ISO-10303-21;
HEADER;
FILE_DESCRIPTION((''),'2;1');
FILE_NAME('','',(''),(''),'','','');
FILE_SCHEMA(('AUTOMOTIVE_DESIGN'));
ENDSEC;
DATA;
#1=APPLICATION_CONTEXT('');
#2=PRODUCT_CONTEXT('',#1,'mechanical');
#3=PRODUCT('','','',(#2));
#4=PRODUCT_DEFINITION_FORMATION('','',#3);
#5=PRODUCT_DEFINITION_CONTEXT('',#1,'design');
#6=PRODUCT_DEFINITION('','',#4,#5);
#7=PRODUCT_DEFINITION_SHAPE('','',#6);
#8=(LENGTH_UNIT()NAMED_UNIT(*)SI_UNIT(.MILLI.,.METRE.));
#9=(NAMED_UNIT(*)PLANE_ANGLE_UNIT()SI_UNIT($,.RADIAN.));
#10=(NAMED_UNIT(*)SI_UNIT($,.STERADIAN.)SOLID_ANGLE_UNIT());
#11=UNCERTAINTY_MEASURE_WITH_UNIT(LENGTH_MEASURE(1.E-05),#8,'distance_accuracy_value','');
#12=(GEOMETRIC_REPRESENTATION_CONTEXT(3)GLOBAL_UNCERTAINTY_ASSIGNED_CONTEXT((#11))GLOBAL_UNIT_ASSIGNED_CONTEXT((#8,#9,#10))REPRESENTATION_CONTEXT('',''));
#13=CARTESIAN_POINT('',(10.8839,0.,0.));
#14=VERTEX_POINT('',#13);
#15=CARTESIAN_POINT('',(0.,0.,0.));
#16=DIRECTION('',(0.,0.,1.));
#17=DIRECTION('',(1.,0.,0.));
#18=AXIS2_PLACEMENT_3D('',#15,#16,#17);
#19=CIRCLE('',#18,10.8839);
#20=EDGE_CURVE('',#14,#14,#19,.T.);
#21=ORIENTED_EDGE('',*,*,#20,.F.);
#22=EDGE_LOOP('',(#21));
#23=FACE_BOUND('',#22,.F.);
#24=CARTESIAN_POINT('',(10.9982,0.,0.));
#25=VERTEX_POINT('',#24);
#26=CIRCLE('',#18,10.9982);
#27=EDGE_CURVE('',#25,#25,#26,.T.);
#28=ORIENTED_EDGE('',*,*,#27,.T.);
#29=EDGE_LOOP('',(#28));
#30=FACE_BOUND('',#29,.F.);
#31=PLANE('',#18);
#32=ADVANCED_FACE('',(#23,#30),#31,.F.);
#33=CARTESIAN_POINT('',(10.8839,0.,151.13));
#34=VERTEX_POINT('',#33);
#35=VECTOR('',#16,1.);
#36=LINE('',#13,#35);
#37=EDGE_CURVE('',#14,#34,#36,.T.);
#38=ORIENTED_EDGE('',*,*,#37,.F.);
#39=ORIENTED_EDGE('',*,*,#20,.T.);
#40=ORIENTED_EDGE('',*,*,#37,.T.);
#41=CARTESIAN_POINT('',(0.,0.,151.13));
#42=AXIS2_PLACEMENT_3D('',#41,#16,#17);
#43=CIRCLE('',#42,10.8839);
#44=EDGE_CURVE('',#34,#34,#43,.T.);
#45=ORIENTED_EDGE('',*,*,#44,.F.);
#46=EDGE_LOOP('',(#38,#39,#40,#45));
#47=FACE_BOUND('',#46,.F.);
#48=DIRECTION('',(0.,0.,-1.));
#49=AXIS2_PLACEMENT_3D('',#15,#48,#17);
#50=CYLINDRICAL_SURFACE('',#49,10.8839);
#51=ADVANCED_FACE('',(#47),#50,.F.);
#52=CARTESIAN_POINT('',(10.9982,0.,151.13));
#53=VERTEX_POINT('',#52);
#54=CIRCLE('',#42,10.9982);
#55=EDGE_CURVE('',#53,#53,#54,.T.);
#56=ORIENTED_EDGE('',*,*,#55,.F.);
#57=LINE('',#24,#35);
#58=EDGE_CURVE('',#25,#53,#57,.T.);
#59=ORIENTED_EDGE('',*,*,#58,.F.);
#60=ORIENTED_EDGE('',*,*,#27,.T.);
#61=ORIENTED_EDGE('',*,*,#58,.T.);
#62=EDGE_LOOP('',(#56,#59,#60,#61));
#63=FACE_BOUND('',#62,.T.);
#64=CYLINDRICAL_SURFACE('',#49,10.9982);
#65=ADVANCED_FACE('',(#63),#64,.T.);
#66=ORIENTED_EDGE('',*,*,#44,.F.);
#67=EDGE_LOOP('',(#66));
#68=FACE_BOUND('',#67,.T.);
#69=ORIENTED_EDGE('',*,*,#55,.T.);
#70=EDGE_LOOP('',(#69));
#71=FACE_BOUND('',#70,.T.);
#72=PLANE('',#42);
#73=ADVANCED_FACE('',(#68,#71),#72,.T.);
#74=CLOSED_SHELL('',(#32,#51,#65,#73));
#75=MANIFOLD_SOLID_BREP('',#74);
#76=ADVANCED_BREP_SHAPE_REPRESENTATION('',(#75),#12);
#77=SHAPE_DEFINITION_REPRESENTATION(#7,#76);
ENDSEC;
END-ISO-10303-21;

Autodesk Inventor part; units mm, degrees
ref_plane "YZ Plane" through (0, 0, 0) normal (1, 0, 0) x (0, 1, 0)
ref_plane "XZ Plane" through (0, 0, 0) normal (0, 1, 0) x (-1, 0, 0)
ref_plane "XY Plane" through (0, 0, 0) normal (0, 0, 1) x (1, 0, 0)
sketch "Sketch1" plane through (0, 0, 0) normal (0, 0, 1) x (1, 0, 0)
  circle A0 centre (0, 0) radius 10.8839
  circle A1 centre (0, 0) radius 10.9982
  dimension "d0" = 21.7678
  dimension "d1" = 21.9964
extrude "Extrusion1" add sketch "Sketch1" along normal blind 151.13
properties part number "Thermal Tape"
